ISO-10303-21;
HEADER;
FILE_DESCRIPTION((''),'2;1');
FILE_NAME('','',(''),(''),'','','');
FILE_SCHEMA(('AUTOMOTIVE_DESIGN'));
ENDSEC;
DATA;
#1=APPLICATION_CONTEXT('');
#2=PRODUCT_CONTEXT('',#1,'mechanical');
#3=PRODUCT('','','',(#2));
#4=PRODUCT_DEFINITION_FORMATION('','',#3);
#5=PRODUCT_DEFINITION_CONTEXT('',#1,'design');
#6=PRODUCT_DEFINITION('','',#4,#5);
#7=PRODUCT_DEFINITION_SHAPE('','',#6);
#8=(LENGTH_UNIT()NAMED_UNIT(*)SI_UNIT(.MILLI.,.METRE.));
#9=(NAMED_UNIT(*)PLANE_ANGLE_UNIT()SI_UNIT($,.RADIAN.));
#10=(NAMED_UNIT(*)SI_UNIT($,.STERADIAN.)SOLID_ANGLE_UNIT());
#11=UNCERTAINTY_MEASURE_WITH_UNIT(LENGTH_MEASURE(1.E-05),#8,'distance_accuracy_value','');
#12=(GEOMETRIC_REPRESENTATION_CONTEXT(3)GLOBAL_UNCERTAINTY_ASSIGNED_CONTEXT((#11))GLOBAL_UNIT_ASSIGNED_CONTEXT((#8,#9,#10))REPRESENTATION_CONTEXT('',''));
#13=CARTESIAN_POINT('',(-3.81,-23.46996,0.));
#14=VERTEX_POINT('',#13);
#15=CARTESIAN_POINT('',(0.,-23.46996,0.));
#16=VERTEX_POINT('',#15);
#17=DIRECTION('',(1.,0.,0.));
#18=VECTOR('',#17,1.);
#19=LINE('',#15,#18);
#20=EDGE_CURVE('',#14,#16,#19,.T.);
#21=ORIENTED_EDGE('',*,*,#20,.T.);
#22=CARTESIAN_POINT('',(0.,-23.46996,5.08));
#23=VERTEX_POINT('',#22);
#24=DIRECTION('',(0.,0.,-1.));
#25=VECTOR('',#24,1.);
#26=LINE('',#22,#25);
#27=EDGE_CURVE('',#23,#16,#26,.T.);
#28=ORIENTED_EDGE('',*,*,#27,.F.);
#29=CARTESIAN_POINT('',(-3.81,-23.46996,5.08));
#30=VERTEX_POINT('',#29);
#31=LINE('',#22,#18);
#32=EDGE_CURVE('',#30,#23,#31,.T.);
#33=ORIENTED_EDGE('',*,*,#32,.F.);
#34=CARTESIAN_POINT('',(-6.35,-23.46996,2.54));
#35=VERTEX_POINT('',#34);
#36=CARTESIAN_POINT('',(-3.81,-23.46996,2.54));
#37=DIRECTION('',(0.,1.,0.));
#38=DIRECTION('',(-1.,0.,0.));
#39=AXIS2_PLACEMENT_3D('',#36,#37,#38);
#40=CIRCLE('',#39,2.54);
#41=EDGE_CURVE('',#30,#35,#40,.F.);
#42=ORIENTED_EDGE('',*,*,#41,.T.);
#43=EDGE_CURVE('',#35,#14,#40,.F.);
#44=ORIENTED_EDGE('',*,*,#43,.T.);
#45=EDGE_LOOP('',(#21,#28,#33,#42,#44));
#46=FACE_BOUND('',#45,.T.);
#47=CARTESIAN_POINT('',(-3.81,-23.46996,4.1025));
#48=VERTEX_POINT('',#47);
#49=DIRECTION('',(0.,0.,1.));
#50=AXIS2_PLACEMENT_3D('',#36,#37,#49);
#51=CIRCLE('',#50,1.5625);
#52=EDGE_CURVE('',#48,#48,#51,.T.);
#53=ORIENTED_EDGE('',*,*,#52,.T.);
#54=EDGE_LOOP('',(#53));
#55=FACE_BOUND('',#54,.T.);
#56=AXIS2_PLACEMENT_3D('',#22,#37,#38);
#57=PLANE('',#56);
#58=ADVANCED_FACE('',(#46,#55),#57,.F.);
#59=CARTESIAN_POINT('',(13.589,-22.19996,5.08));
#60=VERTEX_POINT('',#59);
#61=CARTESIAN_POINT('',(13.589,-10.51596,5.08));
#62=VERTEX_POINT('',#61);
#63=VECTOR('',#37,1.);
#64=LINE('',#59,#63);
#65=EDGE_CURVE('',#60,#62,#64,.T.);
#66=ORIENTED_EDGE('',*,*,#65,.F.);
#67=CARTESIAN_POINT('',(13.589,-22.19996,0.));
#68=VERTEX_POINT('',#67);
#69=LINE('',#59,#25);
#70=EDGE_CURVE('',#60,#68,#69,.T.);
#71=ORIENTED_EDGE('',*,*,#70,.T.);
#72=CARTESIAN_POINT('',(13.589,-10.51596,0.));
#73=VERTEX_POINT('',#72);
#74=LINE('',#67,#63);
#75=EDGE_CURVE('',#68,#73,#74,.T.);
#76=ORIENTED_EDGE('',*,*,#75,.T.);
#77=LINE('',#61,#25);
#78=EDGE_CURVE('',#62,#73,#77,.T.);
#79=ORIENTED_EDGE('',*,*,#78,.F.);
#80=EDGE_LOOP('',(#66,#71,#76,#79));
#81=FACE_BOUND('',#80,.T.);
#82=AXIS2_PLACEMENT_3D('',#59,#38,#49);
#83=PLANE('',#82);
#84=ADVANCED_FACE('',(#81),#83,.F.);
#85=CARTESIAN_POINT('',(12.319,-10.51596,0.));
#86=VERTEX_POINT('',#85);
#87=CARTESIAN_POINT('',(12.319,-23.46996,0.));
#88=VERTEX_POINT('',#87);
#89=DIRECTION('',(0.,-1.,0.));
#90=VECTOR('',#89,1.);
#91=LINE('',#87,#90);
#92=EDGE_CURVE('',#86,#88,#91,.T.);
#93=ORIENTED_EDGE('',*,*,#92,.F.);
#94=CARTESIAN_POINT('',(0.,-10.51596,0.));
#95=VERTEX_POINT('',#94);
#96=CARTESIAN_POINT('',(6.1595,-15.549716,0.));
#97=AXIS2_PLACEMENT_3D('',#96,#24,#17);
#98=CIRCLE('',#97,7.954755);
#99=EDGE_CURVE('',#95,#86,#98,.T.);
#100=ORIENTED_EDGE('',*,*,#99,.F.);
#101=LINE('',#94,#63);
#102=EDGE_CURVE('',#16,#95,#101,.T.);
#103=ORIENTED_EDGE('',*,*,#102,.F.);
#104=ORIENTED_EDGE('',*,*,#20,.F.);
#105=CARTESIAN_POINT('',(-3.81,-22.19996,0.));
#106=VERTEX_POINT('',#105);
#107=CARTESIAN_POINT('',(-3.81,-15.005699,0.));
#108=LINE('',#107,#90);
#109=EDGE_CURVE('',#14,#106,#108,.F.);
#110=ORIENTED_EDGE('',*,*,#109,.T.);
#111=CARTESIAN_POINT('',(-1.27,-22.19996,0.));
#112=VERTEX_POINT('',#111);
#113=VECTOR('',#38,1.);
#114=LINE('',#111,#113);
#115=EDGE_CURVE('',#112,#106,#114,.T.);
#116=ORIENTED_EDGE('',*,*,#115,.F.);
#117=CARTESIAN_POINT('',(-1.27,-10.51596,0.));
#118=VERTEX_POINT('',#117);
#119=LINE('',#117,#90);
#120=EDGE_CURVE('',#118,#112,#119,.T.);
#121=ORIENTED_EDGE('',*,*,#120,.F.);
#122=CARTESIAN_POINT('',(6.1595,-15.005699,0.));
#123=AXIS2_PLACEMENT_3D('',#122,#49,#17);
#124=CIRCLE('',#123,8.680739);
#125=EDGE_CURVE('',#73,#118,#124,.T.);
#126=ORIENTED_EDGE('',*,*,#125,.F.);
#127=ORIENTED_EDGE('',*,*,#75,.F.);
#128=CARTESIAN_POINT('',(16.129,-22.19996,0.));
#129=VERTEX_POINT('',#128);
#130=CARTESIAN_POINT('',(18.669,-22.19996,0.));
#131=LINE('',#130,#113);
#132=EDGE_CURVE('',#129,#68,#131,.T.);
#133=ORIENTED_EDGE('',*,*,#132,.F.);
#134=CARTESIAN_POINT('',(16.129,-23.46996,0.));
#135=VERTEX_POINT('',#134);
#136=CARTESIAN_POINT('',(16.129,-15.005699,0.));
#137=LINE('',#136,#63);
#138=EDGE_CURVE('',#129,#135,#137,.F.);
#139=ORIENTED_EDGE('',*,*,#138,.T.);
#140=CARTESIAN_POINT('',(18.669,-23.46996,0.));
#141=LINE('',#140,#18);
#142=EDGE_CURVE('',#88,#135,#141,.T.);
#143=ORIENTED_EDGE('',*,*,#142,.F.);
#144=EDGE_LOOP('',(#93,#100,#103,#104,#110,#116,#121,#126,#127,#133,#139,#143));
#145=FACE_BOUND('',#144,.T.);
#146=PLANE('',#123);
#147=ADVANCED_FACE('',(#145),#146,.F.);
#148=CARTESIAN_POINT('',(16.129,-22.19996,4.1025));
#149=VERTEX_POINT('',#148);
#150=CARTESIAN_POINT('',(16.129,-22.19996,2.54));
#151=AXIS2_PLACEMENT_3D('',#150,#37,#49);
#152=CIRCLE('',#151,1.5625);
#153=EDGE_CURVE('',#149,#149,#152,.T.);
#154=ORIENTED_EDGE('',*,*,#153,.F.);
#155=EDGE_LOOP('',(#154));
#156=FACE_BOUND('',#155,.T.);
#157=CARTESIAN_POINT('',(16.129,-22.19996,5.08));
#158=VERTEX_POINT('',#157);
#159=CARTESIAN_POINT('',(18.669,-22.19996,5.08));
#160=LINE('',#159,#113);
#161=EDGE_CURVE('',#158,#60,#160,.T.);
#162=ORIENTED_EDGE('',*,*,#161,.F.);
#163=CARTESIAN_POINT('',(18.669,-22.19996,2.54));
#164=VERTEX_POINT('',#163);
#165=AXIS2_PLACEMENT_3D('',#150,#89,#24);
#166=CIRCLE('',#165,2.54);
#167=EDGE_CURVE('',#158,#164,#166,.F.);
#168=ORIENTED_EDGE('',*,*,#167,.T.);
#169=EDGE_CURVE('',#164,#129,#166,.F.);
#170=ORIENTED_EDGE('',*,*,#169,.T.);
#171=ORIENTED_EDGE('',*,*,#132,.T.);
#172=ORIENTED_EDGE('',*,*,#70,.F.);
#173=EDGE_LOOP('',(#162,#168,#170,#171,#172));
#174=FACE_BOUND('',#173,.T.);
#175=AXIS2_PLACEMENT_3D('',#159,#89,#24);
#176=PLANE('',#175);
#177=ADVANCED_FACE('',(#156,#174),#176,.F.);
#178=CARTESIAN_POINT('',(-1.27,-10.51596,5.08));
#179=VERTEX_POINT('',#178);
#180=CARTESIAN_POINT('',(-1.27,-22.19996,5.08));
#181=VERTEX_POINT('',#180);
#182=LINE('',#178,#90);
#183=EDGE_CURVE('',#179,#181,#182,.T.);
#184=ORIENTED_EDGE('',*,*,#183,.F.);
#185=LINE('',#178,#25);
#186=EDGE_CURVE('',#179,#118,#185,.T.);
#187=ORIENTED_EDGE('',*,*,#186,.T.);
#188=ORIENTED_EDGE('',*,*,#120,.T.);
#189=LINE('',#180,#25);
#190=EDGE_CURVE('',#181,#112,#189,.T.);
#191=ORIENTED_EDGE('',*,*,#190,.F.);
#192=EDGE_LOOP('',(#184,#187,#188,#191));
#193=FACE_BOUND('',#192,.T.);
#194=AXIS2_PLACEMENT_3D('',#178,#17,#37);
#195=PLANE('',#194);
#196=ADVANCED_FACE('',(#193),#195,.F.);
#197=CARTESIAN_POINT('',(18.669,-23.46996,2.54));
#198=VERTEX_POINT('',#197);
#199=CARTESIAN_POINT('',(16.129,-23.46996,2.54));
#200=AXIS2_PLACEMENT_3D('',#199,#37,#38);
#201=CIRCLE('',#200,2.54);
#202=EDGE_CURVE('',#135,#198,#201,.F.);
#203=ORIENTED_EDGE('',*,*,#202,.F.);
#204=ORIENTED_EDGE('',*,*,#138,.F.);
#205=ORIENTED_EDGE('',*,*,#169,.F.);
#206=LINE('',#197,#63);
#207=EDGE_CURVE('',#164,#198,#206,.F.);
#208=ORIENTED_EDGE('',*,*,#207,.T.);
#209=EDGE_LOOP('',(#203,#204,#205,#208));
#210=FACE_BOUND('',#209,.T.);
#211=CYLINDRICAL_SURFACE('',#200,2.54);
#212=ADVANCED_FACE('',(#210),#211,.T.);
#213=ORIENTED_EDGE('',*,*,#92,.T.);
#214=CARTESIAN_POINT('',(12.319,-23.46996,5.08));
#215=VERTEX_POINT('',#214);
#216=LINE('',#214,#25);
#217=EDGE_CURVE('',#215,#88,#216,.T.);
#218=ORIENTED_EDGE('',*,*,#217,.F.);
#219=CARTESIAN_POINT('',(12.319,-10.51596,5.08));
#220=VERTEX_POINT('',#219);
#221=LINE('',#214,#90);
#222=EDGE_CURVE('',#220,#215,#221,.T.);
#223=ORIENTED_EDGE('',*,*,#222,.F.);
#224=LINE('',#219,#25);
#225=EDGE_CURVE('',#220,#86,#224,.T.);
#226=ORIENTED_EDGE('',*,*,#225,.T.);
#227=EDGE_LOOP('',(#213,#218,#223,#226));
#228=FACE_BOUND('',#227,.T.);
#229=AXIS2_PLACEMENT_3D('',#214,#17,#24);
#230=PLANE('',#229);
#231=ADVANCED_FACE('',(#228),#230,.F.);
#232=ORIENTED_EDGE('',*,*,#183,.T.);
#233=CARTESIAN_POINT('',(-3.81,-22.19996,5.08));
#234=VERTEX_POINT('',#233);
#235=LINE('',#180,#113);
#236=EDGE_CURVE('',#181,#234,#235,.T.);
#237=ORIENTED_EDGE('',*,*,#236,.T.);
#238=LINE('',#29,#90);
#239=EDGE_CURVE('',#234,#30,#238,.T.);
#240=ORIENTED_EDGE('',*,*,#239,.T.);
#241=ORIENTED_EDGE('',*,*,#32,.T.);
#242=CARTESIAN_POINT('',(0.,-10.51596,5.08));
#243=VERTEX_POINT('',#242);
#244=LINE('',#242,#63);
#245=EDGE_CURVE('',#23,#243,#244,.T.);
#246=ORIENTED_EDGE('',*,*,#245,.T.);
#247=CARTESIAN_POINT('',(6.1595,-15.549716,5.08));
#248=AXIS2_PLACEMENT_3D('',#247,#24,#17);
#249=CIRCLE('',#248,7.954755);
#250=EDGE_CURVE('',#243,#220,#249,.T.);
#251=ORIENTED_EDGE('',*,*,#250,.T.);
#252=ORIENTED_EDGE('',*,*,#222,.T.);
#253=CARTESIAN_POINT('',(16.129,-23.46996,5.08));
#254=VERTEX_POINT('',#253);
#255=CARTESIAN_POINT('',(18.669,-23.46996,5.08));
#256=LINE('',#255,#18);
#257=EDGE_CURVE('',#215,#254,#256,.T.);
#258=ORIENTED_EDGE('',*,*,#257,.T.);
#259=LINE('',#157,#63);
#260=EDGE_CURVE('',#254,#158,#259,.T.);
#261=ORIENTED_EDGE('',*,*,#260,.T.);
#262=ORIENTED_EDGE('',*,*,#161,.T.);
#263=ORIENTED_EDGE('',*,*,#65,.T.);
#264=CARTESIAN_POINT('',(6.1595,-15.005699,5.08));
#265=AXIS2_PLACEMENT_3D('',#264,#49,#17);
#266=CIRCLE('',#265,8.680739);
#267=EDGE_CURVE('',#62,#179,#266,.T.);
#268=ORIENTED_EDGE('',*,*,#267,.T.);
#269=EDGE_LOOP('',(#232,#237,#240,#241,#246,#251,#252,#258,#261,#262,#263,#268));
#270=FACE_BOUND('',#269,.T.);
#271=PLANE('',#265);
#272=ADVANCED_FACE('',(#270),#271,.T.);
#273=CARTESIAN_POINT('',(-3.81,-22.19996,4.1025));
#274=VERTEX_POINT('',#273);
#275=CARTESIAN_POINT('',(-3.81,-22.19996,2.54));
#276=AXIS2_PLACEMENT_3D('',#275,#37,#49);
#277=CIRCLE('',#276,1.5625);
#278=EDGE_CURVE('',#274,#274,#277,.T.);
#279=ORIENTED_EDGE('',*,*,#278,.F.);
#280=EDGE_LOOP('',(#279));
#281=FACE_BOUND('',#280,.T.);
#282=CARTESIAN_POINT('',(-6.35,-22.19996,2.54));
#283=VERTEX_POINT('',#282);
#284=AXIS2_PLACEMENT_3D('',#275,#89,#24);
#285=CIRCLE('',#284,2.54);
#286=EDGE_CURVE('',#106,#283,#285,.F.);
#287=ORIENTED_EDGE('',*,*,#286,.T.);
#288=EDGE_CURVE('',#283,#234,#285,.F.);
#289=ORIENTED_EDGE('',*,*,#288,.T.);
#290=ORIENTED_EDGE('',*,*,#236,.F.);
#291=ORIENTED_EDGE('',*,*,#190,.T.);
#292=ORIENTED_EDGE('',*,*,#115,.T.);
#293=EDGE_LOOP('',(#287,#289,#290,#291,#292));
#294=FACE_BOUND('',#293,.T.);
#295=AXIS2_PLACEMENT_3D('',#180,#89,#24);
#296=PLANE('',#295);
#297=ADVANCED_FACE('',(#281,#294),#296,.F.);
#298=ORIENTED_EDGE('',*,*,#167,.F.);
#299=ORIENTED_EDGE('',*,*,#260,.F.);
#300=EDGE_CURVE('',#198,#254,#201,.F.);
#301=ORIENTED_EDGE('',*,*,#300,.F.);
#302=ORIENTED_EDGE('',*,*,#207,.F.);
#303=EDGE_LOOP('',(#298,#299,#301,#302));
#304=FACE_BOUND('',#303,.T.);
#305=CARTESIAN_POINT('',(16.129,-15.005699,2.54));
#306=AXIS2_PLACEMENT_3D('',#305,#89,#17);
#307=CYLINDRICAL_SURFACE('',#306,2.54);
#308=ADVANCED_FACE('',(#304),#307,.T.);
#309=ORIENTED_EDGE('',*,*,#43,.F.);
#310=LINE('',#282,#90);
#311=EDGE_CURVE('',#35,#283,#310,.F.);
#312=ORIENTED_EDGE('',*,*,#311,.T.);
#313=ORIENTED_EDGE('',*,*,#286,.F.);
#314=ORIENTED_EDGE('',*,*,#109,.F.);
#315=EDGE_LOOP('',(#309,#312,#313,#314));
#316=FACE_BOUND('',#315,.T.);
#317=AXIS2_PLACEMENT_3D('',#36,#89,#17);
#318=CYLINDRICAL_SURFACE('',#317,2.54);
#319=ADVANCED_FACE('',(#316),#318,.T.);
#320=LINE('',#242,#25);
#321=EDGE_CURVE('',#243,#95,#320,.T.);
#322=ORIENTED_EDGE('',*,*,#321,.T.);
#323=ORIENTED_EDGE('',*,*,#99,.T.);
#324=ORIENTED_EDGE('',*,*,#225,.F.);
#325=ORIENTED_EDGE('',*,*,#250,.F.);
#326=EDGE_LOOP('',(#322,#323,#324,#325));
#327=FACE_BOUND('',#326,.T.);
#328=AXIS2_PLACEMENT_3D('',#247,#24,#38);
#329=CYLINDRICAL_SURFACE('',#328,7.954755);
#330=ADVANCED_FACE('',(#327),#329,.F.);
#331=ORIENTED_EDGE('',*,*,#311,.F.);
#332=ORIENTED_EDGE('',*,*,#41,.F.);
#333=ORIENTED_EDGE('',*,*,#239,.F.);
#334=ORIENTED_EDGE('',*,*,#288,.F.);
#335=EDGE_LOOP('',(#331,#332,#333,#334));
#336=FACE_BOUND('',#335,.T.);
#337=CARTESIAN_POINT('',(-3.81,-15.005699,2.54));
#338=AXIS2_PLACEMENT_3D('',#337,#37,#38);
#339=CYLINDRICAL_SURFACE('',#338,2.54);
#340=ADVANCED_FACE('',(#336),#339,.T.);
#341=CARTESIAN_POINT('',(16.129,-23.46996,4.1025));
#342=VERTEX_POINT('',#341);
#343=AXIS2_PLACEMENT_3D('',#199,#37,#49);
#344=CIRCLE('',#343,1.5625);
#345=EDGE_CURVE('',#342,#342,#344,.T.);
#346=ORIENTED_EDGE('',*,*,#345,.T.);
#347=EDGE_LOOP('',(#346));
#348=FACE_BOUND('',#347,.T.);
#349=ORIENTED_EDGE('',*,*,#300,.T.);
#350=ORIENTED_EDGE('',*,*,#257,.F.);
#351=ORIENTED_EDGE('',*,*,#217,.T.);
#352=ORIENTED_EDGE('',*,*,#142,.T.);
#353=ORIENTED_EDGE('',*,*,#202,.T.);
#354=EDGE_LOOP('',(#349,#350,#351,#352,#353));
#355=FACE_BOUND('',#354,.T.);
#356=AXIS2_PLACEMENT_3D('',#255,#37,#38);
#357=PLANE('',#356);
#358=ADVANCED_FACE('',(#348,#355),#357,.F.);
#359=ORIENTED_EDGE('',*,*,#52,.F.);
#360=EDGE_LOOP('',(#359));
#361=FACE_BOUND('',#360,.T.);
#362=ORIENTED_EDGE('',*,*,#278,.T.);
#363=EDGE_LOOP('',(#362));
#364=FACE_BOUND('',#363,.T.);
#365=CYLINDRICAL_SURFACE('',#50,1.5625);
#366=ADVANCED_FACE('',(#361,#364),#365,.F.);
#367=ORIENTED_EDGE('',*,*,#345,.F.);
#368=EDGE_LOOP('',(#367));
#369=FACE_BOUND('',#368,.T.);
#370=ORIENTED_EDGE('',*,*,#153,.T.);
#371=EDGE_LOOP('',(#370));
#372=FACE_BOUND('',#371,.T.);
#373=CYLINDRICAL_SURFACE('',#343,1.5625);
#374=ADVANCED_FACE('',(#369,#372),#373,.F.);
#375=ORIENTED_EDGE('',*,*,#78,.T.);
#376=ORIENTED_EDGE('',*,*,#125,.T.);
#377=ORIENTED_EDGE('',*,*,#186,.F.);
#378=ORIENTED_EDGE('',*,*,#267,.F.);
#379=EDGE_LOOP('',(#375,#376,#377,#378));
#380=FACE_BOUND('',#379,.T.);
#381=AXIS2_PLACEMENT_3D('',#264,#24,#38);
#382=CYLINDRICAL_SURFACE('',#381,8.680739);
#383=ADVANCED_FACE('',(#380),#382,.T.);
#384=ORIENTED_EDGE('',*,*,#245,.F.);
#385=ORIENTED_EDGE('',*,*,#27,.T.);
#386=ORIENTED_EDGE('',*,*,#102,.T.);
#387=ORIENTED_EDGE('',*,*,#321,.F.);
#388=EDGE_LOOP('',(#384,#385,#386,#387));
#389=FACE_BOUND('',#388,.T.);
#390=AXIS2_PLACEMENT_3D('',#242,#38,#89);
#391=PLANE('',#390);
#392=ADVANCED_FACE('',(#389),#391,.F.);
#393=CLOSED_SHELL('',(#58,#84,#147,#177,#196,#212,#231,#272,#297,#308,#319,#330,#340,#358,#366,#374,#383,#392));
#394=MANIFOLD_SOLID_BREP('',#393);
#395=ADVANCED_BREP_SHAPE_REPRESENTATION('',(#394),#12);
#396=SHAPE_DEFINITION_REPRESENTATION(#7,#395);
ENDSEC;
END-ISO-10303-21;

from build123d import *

# Parameters (mm, degrees)
BOSS_EXTRUDE1_DEPTH = 5.08
FILLET1_R           = 2.54
SKETCH2_R           = 1.5625
CUT_EXTRUDE1_DEPTH  = 26.027057078


with BuildPart() as part:
    # Sketch1 → Boss-Extrude1 (new body)
    with BuildSketch(Plane.XY):
        with BuildLine():
            Line((18.669, -23.469960484), (12.319, -23.469960484))
            Line((12.319, -23.469960484), (12.319, -10.515960484))
            ThreePointArc((12.319, -10.515960484), (6.1595, -7.594960484), (0, -10.515960484))
            Line((0, -10.515960484), (0, -23.469960484))
            Line((0, -23.469960484), (-6.35, -23.469960484))
            Line((-6.35, -23.469960484), (-6.35, -22.199960484))
            Line((-6.35, -22.199960484), (-1.27, -22.199960484))
            Line((-1.27, -22.199960484), (-1.27, -10.515960484))
            ThreePointArc((-1.27, -10.515960484), (6.1595, -6.324960484), (13.589, -10.515960484))
            Line((13.589, -10.515960484), (13.589, -22.199960484))
            Line((13.589, -22.199960484), (18.669, -22.199960484))
            Line((18.669, -22.199960484), (18.669, -23.469960484))
        make_face()
    extrude(amount=BOSS_EXTRUDE1_DEPTH)

    # Fillet1
    fillet1_edges = [part.edges().sort_by_distance(p)[0] for p in [
        (-6.35, -22.834960484, 0),
        (-6.35, -22.834960484, 5.08),
        (18.669, -22.834960484, 0),
        (18.669, -22.834960484, 5.08),
    ]]
    fillet(fillet1_edges, radius=FILLET1_R - 0.0001)  # a hair under: the kernel refuses the full size

    # Sketch2 → Cut-Extrude1 (cut, through all)
    with BuildSketch(Plane(origin=(0, -22.199960484, 0), x_dir=(1, 0, 0), z_dir=(0, 1, 0))):
        with Locations(Location((16.129, -2.54, 0), (0, 0, 270))):
            Circle(SKETCH2_R)
        with Locations(Location((-3.81, -2.54, 0), (0, 0, 270))):
            Circle(SKETCH2_R)
    extrude(amount=-CUT_EXTRUDE1_DEPTH, mode=Mode.SUBTRACT)


solid = part.part
